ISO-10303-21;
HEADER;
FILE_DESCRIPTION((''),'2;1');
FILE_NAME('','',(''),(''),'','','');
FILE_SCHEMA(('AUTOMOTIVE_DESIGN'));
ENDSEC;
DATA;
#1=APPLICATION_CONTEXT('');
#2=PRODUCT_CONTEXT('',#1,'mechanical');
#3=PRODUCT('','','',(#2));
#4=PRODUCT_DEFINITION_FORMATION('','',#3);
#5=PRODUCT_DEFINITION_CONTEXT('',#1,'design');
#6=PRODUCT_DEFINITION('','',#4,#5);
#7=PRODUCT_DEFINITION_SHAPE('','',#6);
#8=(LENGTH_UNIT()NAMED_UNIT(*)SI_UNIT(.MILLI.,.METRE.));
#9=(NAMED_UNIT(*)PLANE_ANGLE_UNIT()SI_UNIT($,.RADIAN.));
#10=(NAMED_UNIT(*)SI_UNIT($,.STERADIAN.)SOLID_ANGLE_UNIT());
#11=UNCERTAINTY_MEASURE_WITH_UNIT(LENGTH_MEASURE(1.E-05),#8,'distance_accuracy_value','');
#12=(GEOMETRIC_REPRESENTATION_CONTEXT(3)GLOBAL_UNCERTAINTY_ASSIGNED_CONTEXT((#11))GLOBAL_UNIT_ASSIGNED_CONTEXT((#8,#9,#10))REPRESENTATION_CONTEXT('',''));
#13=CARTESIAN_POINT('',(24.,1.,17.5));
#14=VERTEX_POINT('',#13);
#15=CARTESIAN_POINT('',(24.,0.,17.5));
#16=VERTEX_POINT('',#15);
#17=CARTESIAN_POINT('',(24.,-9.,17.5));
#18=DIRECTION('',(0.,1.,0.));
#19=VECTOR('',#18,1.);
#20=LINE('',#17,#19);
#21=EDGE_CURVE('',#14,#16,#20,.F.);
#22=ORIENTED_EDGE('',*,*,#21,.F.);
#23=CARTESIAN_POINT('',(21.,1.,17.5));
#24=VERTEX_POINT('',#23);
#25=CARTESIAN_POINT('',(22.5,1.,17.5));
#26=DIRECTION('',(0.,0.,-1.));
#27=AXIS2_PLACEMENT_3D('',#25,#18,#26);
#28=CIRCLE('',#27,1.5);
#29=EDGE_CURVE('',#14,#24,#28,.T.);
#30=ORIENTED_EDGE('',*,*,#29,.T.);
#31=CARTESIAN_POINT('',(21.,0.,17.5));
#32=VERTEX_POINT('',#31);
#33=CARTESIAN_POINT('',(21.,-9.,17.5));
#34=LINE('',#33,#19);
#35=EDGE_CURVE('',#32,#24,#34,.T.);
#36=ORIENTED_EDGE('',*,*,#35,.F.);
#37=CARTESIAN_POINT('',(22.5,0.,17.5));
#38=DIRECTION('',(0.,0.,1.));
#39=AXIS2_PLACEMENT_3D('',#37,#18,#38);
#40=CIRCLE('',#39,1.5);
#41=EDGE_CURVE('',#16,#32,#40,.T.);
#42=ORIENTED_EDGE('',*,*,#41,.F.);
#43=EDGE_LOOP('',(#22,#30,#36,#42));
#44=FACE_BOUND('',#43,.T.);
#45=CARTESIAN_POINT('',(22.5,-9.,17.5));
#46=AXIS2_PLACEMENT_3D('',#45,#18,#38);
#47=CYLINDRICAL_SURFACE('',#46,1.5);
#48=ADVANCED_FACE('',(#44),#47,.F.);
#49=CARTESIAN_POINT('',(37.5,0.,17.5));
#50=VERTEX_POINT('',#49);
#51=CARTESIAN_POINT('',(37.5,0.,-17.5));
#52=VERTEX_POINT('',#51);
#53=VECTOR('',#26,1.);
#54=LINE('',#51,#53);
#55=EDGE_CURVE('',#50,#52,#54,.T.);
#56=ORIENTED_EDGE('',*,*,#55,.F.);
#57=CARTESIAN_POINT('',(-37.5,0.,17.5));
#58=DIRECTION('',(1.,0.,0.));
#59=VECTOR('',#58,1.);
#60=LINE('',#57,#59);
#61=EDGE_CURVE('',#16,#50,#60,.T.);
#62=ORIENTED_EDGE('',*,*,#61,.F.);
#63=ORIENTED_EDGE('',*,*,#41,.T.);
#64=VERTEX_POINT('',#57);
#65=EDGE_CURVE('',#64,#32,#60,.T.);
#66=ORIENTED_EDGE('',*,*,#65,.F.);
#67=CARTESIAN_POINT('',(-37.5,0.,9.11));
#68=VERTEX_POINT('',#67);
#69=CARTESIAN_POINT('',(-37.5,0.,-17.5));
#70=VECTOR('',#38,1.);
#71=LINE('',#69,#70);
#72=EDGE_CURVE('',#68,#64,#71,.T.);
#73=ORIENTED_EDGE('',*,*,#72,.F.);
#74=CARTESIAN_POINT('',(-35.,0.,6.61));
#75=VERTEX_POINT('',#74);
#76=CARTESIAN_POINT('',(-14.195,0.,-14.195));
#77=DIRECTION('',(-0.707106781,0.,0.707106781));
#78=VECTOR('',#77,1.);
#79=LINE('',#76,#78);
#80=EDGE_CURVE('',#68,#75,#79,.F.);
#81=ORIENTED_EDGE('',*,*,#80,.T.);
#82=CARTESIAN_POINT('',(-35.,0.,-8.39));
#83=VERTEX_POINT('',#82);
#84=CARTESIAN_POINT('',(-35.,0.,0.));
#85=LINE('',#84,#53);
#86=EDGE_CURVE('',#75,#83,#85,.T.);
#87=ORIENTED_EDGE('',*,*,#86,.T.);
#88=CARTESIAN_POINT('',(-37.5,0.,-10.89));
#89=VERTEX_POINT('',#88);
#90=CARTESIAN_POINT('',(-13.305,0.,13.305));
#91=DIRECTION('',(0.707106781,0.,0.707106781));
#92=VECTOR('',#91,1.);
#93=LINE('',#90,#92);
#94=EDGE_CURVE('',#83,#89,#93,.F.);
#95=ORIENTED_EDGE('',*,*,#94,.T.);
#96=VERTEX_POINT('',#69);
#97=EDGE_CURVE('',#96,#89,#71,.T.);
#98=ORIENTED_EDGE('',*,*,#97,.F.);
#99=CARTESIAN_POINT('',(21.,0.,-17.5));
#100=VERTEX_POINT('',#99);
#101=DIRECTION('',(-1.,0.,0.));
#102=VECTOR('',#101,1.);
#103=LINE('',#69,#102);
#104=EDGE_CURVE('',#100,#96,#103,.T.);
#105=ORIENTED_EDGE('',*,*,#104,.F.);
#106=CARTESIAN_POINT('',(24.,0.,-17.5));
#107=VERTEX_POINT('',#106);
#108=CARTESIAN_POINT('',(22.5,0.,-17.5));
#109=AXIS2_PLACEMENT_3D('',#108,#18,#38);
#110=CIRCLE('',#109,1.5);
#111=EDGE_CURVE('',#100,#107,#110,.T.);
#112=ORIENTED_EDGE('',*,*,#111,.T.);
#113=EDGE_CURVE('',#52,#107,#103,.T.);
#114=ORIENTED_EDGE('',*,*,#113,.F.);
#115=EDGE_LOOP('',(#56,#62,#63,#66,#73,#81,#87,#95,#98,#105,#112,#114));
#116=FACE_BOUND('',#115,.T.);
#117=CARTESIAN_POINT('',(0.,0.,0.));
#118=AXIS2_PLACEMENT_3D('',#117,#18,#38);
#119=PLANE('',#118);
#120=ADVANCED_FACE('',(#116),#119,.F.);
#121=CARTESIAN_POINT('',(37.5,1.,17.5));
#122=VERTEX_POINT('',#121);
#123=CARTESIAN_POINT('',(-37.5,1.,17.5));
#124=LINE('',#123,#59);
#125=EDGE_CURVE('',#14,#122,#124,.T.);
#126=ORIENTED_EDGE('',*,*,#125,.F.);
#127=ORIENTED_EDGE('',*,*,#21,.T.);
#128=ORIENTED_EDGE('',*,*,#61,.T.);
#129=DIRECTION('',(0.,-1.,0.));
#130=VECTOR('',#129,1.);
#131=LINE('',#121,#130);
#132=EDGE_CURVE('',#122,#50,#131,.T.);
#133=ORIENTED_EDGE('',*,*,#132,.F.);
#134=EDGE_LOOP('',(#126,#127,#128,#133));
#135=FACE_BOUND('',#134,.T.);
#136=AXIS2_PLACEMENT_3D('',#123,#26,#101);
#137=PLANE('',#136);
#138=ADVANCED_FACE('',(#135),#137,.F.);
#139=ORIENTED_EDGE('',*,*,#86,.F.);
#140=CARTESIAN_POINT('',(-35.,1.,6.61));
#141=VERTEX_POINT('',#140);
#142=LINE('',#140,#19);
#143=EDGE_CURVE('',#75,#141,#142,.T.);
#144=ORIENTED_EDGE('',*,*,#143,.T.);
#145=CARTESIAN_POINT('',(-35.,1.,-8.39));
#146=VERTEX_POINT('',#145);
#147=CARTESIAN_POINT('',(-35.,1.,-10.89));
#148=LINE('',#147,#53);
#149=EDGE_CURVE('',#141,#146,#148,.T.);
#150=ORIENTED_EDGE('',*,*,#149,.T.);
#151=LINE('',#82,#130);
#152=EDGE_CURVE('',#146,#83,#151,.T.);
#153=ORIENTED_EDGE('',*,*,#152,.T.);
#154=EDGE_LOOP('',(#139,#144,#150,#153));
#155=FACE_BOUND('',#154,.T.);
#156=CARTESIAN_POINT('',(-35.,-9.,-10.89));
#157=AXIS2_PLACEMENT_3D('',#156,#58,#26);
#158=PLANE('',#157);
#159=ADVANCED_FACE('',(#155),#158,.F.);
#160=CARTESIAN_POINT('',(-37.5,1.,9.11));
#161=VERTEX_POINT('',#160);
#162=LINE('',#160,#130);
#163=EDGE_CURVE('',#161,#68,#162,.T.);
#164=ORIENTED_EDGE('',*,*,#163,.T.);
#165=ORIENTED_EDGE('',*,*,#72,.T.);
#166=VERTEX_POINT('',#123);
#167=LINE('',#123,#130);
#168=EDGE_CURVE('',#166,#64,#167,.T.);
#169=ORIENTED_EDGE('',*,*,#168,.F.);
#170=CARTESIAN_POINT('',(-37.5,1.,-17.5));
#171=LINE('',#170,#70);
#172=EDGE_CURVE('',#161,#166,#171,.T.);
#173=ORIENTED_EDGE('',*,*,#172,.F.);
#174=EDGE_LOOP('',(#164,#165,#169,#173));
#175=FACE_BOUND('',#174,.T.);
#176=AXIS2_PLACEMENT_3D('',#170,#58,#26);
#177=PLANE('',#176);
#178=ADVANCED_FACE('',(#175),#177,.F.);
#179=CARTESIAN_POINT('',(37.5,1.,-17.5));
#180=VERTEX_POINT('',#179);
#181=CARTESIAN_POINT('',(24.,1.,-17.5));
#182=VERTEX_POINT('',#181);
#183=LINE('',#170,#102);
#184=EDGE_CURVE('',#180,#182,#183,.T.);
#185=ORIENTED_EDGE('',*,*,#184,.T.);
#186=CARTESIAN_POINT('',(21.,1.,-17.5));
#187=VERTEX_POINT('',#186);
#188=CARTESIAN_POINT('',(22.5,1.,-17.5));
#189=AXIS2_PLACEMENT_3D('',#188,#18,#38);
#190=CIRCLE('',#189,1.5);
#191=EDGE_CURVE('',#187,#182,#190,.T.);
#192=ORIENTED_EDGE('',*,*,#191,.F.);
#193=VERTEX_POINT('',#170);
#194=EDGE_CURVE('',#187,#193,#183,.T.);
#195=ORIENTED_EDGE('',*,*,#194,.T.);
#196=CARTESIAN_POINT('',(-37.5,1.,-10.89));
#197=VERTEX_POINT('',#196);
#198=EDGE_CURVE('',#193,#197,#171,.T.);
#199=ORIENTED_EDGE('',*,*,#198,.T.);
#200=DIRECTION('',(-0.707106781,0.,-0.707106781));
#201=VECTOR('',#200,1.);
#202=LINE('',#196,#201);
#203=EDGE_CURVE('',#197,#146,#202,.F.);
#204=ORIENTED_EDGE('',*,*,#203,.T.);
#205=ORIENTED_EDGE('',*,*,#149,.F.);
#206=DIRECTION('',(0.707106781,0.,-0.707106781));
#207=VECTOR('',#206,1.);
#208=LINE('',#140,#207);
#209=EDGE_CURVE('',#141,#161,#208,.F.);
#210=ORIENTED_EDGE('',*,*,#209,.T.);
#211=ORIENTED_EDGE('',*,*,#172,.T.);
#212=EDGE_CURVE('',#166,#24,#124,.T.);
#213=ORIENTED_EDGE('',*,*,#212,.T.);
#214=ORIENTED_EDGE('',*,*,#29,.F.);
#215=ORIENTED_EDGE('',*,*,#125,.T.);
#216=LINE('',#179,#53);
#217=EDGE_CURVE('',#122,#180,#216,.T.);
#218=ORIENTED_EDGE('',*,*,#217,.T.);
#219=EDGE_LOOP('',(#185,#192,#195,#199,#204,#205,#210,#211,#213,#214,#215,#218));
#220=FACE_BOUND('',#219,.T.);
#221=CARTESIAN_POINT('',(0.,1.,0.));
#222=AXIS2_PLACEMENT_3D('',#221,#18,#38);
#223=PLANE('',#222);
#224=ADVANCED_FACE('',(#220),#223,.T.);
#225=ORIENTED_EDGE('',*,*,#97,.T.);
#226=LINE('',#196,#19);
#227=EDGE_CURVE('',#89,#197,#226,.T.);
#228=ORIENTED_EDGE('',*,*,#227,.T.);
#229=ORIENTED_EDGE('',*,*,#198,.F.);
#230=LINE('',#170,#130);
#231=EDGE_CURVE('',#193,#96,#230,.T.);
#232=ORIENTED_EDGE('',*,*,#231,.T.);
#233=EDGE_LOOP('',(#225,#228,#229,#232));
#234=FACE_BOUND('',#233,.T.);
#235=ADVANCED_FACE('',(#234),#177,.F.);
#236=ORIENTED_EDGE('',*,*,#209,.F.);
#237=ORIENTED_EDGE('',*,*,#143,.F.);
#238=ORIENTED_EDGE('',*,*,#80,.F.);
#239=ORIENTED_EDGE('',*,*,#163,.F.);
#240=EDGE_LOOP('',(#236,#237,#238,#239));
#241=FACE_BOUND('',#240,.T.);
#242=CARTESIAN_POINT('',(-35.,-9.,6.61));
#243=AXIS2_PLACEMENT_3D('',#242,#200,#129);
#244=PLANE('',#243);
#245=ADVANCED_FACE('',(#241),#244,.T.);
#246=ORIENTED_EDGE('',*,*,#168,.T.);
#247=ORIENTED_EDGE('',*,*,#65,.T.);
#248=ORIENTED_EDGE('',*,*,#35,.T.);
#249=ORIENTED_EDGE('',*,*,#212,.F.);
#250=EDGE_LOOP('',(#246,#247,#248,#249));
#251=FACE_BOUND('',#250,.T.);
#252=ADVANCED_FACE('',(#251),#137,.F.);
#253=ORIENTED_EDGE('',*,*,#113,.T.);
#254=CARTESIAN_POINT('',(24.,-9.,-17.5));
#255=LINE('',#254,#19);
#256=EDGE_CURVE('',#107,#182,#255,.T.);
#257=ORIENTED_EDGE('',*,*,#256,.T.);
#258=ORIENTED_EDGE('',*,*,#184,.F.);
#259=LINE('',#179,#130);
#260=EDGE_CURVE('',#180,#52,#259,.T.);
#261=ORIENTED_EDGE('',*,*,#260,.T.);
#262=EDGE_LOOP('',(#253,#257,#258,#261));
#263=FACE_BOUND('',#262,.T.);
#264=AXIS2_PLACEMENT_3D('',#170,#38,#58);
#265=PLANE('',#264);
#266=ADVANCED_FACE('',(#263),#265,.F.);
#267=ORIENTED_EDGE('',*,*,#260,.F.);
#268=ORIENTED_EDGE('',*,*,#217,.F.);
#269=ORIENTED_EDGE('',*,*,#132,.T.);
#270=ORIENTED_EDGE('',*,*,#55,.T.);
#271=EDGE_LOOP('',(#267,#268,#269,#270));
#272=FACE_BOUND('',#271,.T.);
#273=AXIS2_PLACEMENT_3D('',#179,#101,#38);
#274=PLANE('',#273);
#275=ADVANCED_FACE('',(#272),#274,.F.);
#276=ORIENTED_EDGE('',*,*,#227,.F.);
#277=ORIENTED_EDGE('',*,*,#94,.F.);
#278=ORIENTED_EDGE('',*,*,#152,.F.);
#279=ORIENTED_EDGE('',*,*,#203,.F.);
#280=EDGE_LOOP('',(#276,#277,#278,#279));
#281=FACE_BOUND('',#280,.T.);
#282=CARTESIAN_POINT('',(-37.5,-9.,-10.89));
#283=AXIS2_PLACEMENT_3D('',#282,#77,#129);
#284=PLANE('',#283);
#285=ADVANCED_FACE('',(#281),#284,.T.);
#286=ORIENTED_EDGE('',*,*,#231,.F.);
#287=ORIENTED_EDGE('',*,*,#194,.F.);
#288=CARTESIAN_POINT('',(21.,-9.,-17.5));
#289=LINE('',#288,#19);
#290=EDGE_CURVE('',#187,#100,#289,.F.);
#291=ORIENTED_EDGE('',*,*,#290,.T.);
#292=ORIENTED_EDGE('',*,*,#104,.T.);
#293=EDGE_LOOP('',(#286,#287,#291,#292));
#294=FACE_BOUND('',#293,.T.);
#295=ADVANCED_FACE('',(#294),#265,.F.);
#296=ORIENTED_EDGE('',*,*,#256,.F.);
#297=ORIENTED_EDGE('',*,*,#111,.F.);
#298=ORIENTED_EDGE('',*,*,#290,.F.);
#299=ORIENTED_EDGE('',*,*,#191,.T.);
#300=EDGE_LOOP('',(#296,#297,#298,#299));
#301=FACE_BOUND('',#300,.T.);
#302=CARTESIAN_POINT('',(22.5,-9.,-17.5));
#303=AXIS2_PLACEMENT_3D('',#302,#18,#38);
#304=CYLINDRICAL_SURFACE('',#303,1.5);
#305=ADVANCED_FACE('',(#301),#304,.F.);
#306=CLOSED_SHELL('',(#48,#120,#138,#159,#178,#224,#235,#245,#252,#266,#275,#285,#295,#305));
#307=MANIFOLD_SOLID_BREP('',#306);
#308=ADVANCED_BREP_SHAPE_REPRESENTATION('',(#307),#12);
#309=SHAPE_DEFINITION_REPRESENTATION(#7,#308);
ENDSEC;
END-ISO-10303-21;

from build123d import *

# Parameters (mm, degrees)
SKETCH1_W           = 75
SKETCH1_H           = 35
BOSS_EXTRUDE1_DEPTH = 1
SKETCH2_R           = 1.5
SKETCH2_W           = 5
SKETCH2_H           = 20
CUT_EXTRUDE1_DEPTH  = 10
CHAMFER1_SIZE       = 2.5


with BuildPart() as part:
    # Sketch1 → Boss-Extrude1 (new body)
    with BuildSketch(Plane(origin=(0, 0, 0), x_dir=(1, 0, 0), z_dir=(0, 1, 0))):
        Rectangle(SKETCH1_W, SKETCH1_H)
    extrude(amount=BOSS_EXTRUDE1_DEPTH)

    # Sketch2 → Cut-Extrude1 (cut)
    with BuildSketch(Plane(origin=(0, 1, 0), x_dir=(1, 0, 0), z_dir=(0, 1, 0))):
        with Locations((22.5, 17.5)):
            Circle(SKETCH2_R)
        with Locations((22.5, -17.5)):
            Circle(SKETCH2_R)
        with Locations((-37.5, 0.89)):
            Rectangle(SKETCH2_W, SKETCH2_H)
    extrude(amount=-CUT_EXTRUDE1_DEPTH, mode=Mode.SUBTRACT)

    # Chamfer1
    chamfer1_edges = [part.edges().sort_by_distance(p)[0] for p in [
        (-35, 0.5, 9.11),
        (-35, 0.5, -10.89),
    ]]
    chamfer(chamfer1_edges, length=CHAMFER1_SIZE - 0.0001)  # a hair under: the kernel refuses the full size


solid = part.part
